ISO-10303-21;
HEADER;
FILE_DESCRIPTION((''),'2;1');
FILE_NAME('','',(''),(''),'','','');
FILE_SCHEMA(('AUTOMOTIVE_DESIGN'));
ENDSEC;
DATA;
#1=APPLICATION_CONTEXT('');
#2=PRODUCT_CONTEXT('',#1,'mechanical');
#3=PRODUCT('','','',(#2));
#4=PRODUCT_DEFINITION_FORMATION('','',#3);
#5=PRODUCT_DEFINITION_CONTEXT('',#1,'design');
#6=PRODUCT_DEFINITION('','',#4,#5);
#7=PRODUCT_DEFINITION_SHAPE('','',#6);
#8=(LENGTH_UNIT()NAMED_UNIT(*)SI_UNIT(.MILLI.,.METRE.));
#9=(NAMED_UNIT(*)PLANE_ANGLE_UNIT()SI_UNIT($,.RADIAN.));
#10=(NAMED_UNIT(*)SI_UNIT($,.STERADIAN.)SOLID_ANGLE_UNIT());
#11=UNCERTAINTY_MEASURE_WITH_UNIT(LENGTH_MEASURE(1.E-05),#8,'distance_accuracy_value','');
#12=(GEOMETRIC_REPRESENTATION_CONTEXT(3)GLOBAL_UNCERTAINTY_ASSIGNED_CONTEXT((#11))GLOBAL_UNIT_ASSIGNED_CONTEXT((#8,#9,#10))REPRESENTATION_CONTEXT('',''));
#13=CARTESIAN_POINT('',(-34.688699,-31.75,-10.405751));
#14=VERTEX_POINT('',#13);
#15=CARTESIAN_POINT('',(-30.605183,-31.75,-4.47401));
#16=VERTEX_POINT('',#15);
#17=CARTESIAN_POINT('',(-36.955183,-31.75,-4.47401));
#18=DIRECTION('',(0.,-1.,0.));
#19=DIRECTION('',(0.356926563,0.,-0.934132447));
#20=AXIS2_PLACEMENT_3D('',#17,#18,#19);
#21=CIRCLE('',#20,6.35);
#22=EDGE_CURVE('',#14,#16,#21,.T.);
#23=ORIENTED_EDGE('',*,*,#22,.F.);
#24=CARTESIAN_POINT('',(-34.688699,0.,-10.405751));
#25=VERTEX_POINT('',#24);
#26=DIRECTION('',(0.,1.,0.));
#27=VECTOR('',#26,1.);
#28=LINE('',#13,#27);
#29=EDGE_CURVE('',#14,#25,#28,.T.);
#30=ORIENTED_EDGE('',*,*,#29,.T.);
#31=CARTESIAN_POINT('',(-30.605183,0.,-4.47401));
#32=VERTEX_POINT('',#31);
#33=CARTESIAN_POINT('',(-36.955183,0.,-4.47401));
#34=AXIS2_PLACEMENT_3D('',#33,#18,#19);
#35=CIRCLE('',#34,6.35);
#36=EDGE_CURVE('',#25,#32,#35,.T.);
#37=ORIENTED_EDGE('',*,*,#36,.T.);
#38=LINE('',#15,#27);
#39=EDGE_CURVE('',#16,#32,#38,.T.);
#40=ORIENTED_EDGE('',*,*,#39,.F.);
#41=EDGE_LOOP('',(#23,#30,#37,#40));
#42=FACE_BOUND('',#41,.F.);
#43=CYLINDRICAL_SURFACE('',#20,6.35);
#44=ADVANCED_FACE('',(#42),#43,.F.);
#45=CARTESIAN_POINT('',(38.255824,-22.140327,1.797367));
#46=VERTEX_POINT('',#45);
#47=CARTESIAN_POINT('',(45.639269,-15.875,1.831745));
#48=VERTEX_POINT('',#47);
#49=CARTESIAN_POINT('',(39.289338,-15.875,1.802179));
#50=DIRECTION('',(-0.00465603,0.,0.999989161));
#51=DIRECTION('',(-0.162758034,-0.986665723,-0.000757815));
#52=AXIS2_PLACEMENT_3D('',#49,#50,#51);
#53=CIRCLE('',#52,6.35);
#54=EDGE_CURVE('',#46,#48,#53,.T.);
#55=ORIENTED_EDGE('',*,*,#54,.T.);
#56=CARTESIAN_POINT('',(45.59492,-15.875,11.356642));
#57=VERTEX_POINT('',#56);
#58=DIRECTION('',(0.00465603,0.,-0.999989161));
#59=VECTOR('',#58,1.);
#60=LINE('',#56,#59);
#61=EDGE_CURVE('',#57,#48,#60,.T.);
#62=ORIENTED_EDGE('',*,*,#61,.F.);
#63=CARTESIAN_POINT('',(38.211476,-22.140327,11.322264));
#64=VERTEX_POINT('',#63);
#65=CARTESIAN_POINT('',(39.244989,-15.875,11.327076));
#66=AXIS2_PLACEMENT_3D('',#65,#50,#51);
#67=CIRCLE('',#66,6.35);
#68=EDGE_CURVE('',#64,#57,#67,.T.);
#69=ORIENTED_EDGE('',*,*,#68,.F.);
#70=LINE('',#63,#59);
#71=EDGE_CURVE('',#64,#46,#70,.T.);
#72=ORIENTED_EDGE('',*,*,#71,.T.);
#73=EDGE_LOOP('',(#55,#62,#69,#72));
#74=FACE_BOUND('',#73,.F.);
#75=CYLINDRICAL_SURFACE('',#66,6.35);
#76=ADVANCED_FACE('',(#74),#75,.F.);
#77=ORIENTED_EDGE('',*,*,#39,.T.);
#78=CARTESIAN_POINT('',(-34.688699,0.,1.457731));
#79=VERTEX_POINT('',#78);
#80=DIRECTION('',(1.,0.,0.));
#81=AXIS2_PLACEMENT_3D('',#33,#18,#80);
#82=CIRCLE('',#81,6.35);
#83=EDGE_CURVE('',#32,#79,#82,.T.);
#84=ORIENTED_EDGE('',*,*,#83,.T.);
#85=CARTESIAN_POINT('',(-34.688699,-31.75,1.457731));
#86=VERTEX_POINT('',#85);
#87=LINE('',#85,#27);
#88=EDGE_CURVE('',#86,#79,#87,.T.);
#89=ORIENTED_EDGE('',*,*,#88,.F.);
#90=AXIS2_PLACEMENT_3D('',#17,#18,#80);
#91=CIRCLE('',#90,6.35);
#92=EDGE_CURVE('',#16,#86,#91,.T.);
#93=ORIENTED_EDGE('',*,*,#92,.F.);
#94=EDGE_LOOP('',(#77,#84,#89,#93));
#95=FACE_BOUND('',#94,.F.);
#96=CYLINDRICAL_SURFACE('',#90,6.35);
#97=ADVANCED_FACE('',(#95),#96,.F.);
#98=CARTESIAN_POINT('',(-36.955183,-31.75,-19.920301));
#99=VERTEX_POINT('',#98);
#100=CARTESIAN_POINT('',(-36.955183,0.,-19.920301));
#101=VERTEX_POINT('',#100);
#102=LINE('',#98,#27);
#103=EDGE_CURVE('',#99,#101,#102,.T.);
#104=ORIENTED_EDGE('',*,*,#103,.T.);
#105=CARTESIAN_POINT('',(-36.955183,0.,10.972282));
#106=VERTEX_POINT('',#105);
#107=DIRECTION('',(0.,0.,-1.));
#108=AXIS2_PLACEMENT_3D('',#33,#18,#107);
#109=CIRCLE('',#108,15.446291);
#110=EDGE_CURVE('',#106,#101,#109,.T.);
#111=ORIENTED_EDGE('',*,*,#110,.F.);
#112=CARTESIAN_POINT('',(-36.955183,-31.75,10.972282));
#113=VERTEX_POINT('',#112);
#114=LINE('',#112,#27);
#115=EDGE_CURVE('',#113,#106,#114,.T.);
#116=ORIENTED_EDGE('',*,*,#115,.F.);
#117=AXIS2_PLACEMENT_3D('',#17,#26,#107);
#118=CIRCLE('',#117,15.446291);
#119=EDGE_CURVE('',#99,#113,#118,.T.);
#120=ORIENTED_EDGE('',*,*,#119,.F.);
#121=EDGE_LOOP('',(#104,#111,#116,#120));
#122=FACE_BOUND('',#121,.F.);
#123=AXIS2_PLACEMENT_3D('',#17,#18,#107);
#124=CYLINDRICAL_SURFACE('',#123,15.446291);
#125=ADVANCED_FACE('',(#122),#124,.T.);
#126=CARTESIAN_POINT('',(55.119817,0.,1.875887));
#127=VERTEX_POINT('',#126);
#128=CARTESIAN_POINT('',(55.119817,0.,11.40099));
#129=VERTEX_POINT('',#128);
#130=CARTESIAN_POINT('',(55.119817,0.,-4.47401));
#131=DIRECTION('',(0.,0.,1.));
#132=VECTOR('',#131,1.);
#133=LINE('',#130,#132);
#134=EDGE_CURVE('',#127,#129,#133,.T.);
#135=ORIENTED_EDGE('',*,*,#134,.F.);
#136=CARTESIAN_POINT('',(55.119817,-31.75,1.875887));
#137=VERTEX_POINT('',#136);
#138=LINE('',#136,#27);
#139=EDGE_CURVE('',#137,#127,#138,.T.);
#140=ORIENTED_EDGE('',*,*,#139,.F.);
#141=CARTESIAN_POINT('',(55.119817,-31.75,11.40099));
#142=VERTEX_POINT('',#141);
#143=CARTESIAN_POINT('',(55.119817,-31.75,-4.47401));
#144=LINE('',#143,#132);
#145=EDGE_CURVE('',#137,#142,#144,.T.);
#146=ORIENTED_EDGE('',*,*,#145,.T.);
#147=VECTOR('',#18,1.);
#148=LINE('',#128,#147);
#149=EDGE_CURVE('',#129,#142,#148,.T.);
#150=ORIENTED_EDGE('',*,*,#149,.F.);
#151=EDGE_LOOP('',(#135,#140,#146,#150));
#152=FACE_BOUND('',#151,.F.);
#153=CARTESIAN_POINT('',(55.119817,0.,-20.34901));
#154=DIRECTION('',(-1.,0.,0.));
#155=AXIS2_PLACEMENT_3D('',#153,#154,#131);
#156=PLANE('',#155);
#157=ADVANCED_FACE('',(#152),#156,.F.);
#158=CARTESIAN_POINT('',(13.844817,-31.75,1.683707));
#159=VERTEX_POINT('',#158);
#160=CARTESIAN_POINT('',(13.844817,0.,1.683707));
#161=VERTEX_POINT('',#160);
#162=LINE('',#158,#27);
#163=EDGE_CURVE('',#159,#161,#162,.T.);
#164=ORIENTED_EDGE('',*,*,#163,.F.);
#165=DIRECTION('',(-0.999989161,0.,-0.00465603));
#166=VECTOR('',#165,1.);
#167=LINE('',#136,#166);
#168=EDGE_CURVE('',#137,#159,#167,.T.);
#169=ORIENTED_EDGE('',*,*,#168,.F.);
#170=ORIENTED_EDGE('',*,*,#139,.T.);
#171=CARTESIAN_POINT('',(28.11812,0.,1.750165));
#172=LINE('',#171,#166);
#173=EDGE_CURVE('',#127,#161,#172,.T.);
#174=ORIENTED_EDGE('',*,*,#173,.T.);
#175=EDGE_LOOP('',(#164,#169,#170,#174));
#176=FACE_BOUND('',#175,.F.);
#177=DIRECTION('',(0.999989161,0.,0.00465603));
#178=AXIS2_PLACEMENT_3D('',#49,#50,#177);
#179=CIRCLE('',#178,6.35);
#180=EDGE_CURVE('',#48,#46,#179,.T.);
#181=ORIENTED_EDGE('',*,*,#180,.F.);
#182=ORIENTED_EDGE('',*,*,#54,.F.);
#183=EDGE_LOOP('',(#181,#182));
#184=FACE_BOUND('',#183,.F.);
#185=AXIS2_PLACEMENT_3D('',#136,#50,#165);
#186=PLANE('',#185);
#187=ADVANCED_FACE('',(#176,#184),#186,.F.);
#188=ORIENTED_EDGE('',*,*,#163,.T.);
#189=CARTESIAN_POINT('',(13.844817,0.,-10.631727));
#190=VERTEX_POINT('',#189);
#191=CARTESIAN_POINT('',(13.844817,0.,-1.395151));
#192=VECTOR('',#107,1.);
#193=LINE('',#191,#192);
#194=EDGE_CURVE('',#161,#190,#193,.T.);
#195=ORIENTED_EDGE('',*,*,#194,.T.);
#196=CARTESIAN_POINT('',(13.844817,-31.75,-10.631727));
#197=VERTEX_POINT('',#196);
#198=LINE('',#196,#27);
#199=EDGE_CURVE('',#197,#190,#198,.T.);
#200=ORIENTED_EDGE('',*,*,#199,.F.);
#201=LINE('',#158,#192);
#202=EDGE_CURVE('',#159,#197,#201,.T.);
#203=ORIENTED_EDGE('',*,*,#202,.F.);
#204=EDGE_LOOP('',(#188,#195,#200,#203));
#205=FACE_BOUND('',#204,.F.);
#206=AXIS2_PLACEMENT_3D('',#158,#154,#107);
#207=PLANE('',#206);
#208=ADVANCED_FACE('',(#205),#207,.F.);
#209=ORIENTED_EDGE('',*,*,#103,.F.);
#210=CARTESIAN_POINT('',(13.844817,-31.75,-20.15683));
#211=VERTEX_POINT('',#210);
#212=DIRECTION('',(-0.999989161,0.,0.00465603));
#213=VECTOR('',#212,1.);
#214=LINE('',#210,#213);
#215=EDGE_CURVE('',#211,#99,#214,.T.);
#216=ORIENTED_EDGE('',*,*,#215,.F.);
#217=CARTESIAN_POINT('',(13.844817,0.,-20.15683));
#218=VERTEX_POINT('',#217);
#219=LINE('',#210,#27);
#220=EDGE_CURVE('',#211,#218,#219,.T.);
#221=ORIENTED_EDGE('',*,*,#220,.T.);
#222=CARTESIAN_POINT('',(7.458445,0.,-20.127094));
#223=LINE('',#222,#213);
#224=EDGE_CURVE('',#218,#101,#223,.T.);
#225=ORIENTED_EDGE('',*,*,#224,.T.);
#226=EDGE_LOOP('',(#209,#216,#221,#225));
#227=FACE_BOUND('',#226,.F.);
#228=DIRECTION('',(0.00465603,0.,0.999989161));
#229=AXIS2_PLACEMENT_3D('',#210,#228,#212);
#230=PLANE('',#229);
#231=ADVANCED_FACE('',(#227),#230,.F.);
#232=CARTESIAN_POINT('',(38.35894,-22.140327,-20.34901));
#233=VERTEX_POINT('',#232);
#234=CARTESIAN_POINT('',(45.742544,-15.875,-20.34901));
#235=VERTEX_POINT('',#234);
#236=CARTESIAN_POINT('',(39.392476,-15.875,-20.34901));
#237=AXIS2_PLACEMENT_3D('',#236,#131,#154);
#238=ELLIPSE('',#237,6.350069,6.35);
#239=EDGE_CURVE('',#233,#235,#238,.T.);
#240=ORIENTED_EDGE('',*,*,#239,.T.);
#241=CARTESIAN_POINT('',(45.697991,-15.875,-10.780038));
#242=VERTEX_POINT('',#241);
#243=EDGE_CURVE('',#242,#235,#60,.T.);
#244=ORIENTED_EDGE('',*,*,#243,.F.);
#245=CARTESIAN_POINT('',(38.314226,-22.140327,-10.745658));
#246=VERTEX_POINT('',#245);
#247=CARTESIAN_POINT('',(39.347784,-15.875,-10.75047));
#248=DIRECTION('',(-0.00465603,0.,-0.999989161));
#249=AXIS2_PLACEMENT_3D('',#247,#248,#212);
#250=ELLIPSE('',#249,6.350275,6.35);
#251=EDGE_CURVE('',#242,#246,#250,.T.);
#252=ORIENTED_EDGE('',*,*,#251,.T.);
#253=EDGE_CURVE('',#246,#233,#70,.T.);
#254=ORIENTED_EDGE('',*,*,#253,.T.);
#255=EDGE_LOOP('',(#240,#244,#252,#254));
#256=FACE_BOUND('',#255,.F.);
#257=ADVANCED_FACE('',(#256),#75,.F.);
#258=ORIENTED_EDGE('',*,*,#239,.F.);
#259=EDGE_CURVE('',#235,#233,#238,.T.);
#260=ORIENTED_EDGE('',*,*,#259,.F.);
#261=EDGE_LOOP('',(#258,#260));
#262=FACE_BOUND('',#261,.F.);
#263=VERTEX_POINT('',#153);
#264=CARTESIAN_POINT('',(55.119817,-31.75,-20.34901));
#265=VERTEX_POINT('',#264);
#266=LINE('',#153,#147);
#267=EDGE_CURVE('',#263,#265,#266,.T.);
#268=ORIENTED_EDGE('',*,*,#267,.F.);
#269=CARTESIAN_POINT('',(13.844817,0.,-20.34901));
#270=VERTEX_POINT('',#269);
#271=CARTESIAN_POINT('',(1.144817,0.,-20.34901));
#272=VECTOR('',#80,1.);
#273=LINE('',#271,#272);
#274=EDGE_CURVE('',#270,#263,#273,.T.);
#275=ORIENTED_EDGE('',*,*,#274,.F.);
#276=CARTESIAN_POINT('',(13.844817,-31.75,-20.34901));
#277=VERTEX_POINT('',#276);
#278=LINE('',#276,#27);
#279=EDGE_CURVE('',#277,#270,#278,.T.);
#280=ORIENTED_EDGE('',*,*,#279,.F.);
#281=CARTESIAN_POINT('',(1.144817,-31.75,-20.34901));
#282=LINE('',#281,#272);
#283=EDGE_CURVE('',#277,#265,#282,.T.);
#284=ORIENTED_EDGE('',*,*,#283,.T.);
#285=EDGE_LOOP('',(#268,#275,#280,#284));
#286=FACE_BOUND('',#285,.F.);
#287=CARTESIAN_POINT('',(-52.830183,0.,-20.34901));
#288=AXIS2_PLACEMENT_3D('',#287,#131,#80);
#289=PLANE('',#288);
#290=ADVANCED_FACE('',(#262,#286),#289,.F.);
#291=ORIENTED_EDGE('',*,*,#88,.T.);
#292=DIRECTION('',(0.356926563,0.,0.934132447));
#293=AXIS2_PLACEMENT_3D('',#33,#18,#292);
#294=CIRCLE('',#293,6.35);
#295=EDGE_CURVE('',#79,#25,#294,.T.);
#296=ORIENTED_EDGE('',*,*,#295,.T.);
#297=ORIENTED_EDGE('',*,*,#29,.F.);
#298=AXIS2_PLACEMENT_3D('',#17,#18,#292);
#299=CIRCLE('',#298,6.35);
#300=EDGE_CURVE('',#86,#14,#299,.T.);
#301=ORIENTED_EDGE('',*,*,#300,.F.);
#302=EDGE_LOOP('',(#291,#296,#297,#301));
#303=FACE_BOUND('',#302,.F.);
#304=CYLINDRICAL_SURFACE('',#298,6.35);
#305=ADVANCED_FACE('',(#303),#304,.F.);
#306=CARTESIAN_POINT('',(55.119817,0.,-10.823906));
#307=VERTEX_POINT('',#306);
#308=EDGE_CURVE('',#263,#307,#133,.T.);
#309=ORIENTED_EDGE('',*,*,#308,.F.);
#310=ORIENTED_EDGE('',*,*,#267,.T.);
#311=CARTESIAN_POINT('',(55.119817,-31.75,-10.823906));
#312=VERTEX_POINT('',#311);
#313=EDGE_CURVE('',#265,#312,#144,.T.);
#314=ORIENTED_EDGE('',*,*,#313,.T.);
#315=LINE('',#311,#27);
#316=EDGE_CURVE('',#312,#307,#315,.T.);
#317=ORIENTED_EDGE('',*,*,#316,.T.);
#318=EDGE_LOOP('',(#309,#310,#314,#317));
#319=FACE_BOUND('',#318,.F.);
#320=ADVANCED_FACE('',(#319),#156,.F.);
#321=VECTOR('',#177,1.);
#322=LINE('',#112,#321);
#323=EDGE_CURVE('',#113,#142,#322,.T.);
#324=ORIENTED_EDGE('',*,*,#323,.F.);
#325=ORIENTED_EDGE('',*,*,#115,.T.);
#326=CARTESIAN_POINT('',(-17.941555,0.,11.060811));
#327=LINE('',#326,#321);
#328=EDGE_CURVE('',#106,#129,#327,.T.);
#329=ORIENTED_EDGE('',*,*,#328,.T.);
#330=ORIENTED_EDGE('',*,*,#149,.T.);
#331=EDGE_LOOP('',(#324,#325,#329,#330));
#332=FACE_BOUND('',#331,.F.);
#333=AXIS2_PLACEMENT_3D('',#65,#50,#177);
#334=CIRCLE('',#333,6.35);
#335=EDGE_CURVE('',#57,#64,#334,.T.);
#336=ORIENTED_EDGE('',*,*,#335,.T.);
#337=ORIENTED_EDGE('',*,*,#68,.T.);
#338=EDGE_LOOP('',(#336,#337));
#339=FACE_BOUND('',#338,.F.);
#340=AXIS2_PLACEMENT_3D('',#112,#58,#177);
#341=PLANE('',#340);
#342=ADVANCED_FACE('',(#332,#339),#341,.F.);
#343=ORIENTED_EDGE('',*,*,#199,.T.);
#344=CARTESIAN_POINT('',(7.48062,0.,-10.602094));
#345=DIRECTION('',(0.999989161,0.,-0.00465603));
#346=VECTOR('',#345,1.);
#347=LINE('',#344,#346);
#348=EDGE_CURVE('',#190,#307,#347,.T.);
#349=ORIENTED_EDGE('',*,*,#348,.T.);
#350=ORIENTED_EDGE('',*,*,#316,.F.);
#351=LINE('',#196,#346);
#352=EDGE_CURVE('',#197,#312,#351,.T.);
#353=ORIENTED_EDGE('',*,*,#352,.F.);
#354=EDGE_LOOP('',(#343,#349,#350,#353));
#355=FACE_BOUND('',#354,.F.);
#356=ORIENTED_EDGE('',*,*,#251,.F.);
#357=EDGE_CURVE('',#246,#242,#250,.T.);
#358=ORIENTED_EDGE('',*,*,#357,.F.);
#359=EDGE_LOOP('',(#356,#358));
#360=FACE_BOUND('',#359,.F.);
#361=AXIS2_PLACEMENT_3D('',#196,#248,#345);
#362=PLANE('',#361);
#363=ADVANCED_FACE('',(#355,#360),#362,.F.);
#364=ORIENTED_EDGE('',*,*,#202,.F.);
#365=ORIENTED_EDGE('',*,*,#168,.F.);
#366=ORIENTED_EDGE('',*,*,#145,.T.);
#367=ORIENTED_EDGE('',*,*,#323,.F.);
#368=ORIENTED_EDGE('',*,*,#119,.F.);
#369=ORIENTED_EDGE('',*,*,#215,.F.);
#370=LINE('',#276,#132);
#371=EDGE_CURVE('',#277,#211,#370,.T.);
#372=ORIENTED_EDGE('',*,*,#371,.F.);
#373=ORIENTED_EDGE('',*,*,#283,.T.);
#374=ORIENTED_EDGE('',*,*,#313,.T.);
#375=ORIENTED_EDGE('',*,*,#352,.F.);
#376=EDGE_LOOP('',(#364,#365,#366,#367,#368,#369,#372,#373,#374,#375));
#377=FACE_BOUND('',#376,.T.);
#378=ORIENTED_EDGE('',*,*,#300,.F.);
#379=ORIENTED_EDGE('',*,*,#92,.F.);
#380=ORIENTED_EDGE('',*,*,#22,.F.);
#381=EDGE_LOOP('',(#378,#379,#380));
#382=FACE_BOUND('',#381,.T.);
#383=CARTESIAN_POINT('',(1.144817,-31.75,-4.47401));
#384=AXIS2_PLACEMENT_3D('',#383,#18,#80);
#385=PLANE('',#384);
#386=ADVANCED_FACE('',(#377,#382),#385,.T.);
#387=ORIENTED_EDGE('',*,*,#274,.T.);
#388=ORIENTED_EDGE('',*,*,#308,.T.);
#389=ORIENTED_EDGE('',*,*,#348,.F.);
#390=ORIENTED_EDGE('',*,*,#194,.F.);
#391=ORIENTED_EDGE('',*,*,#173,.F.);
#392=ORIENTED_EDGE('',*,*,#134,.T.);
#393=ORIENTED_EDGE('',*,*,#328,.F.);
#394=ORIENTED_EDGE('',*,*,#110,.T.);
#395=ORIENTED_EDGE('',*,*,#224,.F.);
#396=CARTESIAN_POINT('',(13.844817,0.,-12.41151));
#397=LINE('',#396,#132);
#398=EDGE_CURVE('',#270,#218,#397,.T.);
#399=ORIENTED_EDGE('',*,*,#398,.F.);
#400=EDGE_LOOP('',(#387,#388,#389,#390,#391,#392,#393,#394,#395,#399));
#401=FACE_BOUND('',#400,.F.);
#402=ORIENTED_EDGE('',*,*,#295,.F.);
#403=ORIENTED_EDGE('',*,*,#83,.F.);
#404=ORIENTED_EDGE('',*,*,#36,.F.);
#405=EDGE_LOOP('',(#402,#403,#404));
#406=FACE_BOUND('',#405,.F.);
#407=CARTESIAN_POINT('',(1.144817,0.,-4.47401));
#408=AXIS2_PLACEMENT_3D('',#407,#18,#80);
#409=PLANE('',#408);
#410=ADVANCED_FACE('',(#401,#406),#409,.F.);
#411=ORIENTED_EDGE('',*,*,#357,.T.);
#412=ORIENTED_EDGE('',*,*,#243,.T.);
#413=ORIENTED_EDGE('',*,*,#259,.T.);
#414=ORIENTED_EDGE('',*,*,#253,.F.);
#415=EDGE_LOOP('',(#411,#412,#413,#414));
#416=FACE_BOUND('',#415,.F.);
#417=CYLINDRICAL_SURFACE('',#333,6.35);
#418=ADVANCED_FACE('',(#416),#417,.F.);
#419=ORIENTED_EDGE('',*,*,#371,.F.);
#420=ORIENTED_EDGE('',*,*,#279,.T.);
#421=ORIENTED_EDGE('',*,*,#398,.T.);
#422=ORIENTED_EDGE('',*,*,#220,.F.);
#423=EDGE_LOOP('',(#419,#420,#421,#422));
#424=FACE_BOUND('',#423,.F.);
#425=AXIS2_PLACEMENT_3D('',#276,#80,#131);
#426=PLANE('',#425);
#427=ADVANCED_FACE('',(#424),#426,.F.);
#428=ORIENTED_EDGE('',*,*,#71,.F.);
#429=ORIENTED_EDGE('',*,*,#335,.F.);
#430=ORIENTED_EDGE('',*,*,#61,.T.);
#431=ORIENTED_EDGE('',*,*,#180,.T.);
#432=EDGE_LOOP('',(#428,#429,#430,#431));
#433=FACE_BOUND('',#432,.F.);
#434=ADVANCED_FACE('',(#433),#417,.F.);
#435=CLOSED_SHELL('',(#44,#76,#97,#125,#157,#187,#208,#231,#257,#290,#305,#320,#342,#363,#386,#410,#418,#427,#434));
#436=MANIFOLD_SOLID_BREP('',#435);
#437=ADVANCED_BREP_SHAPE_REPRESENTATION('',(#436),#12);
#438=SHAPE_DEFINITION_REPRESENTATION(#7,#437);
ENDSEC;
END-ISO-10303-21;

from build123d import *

# Parameters (mm, degrees)
F0_W     = 107.95
F0_H     = 31.75
F1_DEPTH = 31.75
F3_DEPTH = 31.751
F5_DEPTH = 31.7506558501


with BuildPart() as f1:
    # F0 (on Front) → F1 (new body)
    with BuildSketch(Plane.XZ):
        with Locations((1.144817099, -4.4740095741)):
            Rectangle(F0_W, F0_H)
    extrude(amount=F1_DEPTH)

    # F2 (on face) → F3 (cut, through all)
    with BuildSketch(Plane.XZ.offset(31.75)):
        with BuildLine():
            ThreePointArc((-34.6886992289, -10.405750614), (-31.724758859, -8.0747267722), (-30.605182901, -4.4740095741))
            ThreePointArc((-30.605182901, -4.4740095741), (-31.724758859, -0.8732923759), (-34.6886992289, 1.4577314658))
            ThreePointArc((-34.6886992289, 1.4577314658), (-43.305182901, -4.4740095741), (-34.6886992289, -10.405750614))
        make_face()
        with BuildLine():
            ThreePointArc((-36.955182901, -19.9203009288), (-52.4014742558, -4.4740095741), (-36.955182901, 10.9722817806))
            Line((-36.955182901, 10.9722817806), (55.119817099, 11.4009904259))
            Line((55.119817099, 11.4009904259), (-52.830182901, 11.4009904259))
            Line((-52.830182901, 11.4009904259), (-52.830182901, -20.3490095741))
            Line((-52.830182901, -20.3490095741), (13.844817099, -20.3490095741))
            Line((13.844817099, -20.3490095741), (13.844817099, -20.1568298366))
            Line((13.844817099, -20.1568298366), (-36.955182901, -19.9203009288))
        make_face()
        Polygon((55.119817099, -10.823906328), (55.119817099, 1.8758871798), (13.844817099, 1.6837074423), (13.844817099, -10.6317265905), align=None)
    extrude(amount=-F3_DEPTH, mode=Mode.SUBTRACT)

    # F4 (on face) → F5 (cut, through all)
    with BuildSketch(Plane(origin=(-0.051887861, 0, 11.1441065064), x_dir=(0.9999891606, 0, 0.0046560304), z_dir=(-0.0046560304, 0, 0.9999891606))):
        with BuildLine():
            ThreePointArc((38.2637782771, -22.1403273388), (43.4058074687, -20.7167652744), (45.6473029929, -15.875))
            ThreePointArc((45.6473029929, -15.875), (35.1887985171, -11.0332347256), (38.2637782771, -22.1403273388))
        make_face()
    extrude(amount=-F5_DEPTH, mode=Mode.SUBTRACT)


solid = f1.part
